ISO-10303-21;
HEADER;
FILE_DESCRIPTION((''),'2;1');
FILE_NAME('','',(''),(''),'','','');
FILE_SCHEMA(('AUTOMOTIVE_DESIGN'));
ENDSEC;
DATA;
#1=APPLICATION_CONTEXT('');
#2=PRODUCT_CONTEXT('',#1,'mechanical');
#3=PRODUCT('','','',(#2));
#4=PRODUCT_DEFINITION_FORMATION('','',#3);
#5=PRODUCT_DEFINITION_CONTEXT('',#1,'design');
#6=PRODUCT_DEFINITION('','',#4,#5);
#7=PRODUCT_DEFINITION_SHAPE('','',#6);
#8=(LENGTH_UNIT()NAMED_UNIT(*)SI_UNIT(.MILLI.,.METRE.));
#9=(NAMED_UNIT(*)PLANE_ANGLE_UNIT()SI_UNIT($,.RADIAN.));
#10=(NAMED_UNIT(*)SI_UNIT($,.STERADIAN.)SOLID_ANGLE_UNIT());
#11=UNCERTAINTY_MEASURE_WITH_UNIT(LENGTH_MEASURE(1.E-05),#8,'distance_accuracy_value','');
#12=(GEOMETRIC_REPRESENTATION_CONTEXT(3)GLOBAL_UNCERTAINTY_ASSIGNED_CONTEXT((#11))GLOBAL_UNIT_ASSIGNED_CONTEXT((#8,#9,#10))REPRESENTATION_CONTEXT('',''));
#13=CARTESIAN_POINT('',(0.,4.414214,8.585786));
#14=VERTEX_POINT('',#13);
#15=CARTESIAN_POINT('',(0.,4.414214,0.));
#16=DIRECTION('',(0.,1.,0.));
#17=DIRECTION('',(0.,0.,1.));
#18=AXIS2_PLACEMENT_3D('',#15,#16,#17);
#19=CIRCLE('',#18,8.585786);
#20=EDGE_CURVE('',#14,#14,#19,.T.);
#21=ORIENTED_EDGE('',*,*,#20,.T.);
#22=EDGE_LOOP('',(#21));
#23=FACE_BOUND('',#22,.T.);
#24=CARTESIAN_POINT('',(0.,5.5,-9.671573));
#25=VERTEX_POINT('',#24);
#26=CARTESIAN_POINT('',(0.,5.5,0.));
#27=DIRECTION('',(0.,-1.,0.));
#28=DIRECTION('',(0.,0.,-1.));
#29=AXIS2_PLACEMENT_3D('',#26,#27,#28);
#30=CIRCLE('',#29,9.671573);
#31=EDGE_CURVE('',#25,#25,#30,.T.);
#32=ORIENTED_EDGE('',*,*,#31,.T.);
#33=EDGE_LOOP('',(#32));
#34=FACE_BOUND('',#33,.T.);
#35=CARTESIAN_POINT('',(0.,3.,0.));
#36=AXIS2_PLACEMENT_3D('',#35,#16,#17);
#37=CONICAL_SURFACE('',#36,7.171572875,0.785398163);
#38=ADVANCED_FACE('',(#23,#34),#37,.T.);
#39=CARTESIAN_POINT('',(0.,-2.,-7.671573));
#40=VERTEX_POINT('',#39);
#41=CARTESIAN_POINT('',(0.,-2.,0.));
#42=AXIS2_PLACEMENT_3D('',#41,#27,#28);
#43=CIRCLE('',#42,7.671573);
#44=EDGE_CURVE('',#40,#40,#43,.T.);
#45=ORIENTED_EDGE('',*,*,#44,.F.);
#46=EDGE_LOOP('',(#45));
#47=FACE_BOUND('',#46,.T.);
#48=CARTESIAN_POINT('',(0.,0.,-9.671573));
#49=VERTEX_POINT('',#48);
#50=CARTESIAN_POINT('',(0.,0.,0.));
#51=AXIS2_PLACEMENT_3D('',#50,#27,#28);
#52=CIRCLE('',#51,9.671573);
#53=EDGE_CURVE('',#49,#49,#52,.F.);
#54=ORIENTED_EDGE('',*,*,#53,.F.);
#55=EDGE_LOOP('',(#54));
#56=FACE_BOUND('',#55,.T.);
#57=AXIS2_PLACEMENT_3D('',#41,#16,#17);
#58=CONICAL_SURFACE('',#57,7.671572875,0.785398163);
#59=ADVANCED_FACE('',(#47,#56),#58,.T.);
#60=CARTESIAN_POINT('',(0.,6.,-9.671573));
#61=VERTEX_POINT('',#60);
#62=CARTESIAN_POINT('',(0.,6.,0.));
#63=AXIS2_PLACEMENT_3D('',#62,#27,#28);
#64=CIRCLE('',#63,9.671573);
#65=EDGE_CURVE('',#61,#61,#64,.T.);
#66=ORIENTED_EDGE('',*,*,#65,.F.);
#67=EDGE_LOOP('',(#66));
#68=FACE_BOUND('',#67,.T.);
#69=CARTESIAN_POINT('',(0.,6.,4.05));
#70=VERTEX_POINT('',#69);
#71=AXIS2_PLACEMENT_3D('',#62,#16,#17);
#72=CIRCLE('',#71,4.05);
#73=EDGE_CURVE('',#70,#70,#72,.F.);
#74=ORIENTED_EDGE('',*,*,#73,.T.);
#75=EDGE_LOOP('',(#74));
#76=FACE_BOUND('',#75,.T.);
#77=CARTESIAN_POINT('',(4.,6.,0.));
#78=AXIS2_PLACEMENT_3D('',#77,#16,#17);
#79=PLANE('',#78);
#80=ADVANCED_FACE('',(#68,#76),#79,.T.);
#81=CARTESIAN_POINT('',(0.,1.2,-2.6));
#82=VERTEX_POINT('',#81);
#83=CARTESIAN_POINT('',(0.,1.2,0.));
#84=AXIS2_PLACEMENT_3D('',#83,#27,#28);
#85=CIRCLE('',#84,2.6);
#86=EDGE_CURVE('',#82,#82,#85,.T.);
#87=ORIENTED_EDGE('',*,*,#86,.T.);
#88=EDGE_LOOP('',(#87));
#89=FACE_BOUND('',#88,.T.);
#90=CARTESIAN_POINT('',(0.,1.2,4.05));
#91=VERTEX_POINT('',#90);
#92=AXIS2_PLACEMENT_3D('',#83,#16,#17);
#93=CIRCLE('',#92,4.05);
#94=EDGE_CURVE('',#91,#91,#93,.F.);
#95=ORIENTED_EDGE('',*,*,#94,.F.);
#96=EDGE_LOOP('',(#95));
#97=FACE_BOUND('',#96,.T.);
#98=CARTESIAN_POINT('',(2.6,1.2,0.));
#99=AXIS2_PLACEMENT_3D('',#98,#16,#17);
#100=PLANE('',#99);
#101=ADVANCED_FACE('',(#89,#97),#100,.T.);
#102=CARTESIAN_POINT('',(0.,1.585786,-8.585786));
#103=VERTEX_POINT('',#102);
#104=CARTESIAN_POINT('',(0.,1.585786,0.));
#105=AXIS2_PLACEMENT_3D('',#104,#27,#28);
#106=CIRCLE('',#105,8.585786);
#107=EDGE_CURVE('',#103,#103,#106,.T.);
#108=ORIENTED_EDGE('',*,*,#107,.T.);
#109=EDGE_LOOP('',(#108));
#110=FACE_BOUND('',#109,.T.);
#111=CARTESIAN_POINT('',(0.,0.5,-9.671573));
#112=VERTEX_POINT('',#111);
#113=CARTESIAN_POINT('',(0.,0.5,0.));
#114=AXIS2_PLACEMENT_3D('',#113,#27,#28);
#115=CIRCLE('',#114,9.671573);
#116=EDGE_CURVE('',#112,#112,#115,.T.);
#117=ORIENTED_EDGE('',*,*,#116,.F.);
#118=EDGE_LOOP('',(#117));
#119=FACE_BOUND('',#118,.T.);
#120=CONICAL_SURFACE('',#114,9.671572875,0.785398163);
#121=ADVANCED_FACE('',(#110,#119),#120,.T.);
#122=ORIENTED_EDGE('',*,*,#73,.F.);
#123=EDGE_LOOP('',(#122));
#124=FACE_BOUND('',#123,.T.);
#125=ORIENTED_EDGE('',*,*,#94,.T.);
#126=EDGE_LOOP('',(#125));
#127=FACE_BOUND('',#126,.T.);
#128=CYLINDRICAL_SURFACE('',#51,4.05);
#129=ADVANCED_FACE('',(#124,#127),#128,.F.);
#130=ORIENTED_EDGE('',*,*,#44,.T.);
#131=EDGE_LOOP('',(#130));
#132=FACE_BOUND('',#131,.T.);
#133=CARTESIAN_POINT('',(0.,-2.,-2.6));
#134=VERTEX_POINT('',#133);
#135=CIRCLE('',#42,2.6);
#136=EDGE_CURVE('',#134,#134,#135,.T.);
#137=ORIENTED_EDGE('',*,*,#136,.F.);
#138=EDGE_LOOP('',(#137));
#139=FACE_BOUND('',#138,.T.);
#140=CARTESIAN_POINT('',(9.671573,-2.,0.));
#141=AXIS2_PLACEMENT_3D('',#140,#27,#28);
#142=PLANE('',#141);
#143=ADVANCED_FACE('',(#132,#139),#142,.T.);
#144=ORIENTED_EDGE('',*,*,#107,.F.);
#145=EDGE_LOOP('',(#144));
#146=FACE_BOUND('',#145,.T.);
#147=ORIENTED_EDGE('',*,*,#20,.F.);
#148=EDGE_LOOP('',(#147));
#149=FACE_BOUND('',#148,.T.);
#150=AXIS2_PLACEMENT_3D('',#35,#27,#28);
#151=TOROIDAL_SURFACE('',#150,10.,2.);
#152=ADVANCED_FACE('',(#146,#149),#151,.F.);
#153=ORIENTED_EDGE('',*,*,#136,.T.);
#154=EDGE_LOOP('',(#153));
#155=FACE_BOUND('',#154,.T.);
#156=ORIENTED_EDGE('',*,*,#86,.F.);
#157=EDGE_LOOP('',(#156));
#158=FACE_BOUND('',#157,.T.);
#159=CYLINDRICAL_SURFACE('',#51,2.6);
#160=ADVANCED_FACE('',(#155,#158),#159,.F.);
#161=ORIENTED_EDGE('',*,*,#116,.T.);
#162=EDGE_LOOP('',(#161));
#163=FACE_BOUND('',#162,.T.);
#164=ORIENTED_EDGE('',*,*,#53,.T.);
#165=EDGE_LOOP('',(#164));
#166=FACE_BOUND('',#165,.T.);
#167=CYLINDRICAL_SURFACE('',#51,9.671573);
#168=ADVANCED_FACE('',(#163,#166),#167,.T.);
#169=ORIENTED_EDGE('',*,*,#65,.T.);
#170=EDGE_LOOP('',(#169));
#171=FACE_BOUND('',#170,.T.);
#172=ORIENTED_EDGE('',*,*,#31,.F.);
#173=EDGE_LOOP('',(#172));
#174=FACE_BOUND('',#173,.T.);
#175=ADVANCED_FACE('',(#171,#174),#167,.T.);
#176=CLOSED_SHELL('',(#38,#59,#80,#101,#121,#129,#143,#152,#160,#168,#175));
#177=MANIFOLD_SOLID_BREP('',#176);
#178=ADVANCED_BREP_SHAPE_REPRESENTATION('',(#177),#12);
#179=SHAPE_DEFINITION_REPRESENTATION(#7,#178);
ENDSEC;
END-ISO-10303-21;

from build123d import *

# Parameters (mm, degrees)
FILLET1_R              = 2
MOVE_FACE1_BY          = 2
MOVE_FACE4_BY          = 1.8
MOVE_START             = 1.2
MOVE_FACE3_OUTLINE_R   = 4.05
MOVE_FACE3_OUTLINE_R_2 = 4
MOVE_FACE3_DEPTH       = 4.8
CHAMFER1_SIZE          = 2


# Read off the part's stored shape, not the designer's step: Move Face3
with BuildPart() as part:
    # Sketch2 → Revolve1 (revolve)
    with BuildSketch(Plane.XY, mode=Mode.PRIVATE) as revolve1_sk:
        Polygon((2.6, 0), (2.6, 3), (4, 3), (4, 6), (9.671572875, 6), (9.671572875, 5.5), (7.171572875, 3), (9.671572875, 0.5), (9.671572875, 0), align=None)
    revolve(revolve1_sk.sketch.rotate(Axis((0, 0, 0), (0, 1, 0)), 90), axis=Axis((0, 0, 0), (0, 1, 0)))

    # Fillet1
    fillet1_edges = [part.edges().sort_by_distance(p)[0] for p in [
        (0, 3, 7.171572875),
    ]]
    fillet(fillet1_edges, radius=FILLET1_R)

    # Move Face1: a face moved outward by 2.0
    extrude(part.faces().sort_by_distance((4.835786438, 0, 0))[0], amount=MOVE_FACE1_BY, dir=(0, -1, 0))

    # Move Face4: a face moved inward by 1.8
    extrude(part.faces().sort_by_distance((3.2, 3, 0))[0], amount=MOVE_FACE4_BY, dir=(0, -1, 0), mode=Mode.SUBTRACT)

    # Move Face3 outline → Move Face3 (cut)
    with BuildSketch(Plane(origin=(0, 0, 0), x_dir=(1, 0, 0), z_dir=(0, 1, 0)).offset(MOVE_START)):
        Circle(MOVE_FACE3_OUTLINE_R)
        Circle(MOVE_FACE3_OUTLINE_R_2, mode=Mode.SUBTRACT)
    extrude(amount=MOVE_FACE3_DEPTH, mode=Mode.SUBTRACT)

    # Chamfer1
    chamfer1_edges = [part.edges().sort_by_distance(p)[0] for p in [
        (0, -2, 9.671572875),
    ]]
    chamfer(chamfer1_edges, length=CHAMFER1_SIZE - 0.0001)  # a hair under: the kernel refuses the full size


solid = part.part
